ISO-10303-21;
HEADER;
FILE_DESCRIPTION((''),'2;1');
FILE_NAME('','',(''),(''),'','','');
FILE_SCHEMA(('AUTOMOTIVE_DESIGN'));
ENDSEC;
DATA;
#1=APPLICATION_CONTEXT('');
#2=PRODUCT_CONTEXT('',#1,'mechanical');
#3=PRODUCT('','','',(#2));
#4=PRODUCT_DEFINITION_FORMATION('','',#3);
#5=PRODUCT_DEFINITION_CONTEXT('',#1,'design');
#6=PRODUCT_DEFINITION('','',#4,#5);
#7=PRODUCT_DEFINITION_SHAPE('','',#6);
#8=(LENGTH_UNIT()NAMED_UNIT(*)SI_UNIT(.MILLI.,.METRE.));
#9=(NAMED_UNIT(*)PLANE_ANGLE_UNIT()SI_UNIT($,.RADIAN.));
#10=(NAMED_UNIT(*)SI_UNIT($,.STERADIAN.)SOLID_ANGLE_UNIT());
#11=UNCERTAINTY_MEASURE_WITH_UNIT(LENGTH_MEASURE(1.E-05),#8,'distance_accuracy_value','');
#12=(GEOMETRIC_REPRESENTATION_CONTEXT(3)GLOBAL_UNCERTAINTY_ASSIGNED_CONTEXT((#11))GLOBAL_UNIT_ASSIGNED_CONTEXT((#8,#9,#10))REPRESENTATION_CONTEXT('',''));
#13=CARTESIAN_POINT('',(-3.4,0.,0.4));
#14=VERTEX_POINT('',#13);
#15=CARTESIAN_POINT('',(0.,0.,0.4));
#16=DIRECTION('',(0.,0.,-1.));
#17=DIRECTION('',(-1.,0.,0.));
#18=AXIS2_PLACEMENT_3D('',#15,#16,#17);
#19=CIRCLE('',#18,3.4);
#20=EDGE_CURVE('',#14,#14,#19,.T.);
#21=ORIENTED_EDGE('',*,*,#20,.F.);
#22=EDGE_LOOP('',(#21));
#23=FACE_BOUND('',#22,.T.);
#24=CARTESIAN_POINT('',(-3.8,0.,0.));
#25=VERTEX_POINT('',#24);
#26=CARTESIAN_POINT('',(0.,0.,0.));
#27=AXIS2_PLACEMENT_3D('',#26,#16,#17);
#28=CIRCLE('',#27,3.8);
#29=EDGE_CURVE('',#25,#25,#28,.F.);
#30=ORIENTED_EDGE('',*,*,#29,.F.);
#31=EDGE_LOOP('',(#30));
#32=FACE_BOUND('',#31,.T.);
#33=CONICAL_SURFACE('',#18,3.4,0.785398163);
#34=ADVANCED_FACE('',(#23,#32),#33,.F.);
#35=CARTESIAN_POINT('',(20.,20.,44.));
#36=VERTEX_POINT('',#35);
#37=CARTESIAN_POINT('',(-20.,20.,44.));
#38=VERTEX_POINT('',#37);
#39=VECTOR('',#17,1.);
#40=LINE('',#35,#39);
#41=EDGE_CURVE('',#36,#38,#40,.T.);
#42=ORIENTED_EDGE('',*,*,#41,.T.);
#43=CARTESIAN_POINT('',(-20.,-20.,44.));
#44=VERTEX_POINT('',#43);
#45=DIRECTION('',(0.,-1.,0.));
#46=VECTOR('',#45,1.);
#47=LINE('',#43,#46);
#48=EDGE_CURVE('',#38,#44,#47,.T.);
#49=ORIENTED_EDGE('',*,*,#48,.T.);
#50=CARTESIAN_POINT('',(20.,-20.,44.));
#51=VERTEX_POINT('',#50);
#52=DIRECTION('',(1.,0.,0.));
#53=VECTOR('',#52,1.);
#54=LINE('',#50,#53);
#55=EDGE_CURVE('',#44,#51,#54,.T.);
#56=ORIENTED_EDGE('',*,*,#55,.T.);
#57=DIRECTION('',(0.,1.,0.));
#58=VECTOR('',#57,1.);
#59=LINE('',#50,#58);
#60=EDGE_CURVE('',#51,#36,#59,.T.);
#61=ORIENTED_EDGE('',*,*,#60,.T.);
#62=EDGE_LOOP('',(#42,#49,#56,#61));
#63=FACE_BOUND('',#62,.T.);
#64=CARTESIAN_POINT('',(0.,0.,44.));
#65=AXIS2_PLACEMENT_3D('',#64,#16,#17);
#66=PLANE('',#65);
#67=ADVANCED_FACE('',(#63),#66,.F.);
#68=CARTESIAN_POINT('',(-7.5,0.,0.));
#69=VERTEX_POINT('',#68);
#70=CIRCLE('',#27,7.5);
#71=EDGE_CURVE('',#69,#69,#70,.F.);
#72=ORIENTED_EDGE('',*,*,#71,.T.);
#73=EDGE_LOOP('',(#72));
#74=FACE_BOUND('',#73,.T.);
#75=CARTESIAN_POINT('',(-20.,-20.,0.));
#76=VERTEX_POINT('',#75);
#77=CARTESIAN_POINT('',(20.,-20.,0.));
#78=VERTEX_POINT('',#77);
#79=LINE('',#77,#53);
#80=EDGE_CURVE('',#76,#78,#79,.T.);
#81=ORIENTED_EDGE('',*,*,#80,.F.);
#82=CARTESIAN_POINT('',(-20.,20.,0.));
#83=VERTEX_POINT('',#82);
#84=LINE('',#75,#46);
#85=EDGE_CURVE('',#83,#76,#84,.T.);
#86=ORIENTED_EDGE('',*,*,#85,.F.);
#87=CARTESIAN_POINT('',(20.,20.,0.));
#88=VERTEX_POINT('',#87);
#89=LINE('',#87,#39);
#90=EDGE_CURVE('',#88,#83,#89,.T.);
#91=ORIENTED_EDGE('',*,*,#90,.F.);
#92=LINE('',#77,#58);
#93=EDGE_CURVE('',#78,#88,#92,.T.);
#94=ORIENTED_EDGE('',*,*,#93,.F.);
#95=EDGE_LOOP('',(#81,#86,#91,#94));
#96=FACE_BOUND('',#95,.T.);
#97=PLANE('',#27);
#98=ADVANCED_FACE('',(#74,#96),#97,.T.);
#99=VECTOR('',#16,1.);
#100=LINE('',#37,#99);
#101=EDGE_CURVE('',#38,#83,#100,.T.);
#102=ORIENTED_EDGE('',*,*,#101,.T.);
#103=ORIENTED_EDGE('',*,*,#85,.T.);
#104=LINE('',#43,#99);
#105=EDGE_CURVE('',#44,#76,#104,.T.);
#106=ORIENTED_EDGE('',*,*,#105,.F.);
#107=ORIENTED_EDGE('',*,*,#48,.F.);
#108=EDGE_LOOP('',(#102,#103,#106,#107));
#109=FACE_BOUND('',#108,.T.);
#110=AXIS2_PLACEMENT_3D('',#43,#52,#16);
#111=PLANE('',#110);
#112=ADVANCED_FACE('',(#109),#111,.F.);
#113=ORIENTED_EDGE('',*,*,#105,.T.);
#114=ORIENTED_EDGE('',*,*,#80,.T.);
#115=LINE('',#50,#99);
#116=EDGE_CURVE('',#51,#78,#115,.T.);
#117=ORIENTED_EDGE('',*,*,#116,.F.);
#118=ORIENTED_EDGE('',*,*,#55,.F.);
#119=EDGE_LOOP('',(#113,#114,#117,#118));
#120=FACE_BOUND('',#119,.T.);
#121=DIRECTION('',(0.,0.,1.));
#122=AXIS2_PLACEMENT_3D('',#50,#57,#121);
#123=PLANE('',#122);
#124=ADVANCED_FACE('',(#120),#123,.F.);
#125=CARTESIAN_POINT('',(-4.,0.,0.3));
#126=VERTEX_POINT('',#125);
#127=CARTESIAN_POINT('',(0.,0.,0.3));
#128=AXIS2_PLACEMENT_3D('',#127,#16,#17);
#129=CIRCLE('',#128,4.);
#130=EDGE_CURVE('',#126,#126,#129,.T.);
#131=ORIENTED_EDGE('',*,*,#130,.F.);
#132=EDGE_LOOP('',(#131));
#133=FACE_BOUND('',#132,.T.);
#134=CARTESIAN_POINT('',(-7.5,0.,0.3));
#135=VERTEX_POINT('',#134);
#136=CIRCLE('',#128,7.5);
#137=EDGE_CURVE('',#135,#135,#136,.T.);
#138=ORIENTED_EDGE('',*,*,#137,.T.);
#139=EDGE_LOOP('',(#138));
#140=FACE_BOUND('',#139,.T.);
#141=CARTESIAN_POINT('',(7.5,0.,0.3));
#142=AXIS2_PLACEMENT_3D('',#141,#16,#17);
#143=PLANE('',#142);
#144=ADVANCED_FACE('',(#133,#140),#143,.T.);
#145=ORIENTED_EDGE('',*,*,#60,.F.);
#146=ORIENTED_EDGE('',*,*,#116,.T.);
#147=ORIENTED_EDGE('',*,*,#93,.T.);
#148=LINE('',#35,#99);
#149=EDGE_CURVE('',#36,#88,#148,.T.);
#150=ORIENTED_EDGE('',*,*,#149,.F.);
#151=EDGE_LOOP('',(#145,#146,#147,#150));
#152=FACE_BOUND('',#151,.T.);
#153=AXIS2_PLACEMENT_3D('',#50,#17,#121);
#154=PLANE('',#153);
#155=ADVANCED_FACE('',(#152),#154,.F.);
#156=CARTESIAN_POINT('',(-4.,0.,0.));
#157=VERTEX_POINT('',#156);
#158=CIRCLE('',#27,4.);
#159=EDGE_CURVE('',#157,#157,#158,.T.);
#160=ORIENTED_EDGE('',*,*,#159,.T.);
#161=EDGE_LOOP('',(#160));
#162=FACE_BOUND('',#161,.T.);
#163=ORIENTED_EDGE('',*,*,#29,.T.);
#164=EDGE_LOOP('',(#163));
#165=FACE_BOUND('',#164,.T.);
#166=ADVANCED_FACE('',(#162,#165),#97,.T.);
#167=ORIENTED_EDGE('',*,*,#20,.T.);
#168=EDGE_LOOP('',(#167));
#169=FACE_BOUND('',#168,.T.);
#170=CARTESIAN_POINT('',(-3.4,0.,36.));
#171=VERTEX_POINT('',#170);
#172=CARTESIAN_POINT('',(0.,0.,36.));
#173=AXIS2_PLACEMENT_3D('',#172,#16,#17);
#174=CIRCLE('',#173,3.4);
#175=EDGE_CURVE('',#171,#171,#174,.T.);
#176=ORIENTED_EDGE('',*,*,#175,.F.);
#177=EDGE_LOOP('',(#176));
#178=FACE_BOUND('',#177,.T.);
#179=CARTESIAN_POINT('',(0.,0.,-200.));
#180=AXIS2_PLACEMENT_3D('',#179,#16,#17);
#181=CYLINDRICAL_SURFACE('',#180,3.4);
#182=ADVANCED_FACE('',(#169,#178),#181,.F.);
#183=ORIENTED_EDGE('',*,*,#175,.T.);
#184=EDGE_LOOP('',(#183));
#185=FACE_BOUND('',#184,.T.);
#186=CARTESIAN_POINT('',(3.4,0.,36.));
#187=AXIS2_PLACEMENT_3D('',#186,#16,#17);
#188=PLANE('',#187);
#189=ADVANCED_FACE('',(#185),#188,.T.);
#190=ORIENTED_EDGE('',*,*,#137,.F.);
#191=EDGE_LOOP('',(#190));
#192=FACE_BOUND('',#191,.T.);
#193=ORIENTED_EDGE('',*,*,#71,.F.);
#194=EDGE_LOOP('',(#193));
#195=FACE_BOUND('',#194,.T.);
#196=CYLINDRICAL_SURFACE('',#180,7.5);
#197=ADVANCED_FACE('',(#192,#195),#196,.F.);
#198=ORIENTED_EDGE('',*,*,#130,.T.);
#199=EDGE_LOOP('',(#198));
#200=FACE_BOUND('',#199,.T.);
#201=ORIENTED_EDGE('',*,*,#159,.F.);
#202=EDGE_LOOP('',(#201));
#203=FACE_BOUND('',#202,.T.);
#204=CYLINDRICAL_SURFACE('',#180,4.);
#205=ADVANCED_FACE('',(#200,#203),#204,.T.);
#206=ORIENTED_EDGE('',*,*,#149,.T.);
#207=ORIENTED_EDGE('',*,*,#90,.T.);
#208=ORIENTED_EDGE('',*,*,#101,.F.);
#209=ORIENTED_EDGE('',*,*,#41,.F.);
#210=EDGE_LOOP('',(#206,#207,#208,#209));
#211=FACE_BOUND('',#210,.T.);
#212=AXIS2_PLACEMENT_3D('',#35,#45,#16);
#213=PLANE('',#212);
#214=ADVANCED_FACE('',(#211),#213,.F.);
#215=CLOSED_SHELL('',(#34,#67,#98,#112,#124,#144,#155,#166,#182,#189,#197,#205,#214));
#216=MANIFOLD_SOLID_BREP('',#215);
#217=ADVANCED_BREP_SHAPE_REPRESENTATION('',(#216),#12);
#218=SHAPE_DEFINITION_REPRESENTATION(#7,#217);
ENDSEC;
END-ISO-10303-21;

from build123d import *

# Parameters (mm, degrees)
SKETCH1_W   = 40
SKETCH1_H   = 40
BLOCK_DEPTH = 44
SKETCH4_W   = 3.5
SKETCH4_H   = 0.8


with BuildPart() as part:
    # Sketch1 → Block (new body)
    with BuildSketch(Plane(origin=(0, 0, 0), x_dir=(0, 1, 0), z_dir=(0, 0, 1))):
        Rectangle(SKETCH1_W, SKETCH1_H)
    extrude(amount=BLOCK_DEPTH)

    # Sketch2 → Hole (revolve, cut)
    with BuildSketch(Plane(origin=(0, 0, 0), x_dir=(-1, 0, 0), z_dir=(0, 1, 0))):
        Polygon((0, -0.5), (-4.3, -0.5), (-3.8, 0), (-3.4, 0.4), (-3.4, 36), (0, 36), align=None)
    revolve(axis=Axis((0, 0, -200), (0, 0, 1)), mode=Mode.SUBTRACT)

    # Sketch4 → InsertGroove (revolve, cut)
    with BuildSketch(Plane(origin=(0, 0, 0), x_dir=(-1, 0, 0), z_dir=(0, 1, 0))):
        with Locations((-5.75, -0.1)):
            Rectangle(SKETCH4_W, SKETCH4_H)
    revolve(axis=Axis((0, 0, -200), (0, 0, 1)), mode=Mode.SUBTRACT)


solid = part.part
